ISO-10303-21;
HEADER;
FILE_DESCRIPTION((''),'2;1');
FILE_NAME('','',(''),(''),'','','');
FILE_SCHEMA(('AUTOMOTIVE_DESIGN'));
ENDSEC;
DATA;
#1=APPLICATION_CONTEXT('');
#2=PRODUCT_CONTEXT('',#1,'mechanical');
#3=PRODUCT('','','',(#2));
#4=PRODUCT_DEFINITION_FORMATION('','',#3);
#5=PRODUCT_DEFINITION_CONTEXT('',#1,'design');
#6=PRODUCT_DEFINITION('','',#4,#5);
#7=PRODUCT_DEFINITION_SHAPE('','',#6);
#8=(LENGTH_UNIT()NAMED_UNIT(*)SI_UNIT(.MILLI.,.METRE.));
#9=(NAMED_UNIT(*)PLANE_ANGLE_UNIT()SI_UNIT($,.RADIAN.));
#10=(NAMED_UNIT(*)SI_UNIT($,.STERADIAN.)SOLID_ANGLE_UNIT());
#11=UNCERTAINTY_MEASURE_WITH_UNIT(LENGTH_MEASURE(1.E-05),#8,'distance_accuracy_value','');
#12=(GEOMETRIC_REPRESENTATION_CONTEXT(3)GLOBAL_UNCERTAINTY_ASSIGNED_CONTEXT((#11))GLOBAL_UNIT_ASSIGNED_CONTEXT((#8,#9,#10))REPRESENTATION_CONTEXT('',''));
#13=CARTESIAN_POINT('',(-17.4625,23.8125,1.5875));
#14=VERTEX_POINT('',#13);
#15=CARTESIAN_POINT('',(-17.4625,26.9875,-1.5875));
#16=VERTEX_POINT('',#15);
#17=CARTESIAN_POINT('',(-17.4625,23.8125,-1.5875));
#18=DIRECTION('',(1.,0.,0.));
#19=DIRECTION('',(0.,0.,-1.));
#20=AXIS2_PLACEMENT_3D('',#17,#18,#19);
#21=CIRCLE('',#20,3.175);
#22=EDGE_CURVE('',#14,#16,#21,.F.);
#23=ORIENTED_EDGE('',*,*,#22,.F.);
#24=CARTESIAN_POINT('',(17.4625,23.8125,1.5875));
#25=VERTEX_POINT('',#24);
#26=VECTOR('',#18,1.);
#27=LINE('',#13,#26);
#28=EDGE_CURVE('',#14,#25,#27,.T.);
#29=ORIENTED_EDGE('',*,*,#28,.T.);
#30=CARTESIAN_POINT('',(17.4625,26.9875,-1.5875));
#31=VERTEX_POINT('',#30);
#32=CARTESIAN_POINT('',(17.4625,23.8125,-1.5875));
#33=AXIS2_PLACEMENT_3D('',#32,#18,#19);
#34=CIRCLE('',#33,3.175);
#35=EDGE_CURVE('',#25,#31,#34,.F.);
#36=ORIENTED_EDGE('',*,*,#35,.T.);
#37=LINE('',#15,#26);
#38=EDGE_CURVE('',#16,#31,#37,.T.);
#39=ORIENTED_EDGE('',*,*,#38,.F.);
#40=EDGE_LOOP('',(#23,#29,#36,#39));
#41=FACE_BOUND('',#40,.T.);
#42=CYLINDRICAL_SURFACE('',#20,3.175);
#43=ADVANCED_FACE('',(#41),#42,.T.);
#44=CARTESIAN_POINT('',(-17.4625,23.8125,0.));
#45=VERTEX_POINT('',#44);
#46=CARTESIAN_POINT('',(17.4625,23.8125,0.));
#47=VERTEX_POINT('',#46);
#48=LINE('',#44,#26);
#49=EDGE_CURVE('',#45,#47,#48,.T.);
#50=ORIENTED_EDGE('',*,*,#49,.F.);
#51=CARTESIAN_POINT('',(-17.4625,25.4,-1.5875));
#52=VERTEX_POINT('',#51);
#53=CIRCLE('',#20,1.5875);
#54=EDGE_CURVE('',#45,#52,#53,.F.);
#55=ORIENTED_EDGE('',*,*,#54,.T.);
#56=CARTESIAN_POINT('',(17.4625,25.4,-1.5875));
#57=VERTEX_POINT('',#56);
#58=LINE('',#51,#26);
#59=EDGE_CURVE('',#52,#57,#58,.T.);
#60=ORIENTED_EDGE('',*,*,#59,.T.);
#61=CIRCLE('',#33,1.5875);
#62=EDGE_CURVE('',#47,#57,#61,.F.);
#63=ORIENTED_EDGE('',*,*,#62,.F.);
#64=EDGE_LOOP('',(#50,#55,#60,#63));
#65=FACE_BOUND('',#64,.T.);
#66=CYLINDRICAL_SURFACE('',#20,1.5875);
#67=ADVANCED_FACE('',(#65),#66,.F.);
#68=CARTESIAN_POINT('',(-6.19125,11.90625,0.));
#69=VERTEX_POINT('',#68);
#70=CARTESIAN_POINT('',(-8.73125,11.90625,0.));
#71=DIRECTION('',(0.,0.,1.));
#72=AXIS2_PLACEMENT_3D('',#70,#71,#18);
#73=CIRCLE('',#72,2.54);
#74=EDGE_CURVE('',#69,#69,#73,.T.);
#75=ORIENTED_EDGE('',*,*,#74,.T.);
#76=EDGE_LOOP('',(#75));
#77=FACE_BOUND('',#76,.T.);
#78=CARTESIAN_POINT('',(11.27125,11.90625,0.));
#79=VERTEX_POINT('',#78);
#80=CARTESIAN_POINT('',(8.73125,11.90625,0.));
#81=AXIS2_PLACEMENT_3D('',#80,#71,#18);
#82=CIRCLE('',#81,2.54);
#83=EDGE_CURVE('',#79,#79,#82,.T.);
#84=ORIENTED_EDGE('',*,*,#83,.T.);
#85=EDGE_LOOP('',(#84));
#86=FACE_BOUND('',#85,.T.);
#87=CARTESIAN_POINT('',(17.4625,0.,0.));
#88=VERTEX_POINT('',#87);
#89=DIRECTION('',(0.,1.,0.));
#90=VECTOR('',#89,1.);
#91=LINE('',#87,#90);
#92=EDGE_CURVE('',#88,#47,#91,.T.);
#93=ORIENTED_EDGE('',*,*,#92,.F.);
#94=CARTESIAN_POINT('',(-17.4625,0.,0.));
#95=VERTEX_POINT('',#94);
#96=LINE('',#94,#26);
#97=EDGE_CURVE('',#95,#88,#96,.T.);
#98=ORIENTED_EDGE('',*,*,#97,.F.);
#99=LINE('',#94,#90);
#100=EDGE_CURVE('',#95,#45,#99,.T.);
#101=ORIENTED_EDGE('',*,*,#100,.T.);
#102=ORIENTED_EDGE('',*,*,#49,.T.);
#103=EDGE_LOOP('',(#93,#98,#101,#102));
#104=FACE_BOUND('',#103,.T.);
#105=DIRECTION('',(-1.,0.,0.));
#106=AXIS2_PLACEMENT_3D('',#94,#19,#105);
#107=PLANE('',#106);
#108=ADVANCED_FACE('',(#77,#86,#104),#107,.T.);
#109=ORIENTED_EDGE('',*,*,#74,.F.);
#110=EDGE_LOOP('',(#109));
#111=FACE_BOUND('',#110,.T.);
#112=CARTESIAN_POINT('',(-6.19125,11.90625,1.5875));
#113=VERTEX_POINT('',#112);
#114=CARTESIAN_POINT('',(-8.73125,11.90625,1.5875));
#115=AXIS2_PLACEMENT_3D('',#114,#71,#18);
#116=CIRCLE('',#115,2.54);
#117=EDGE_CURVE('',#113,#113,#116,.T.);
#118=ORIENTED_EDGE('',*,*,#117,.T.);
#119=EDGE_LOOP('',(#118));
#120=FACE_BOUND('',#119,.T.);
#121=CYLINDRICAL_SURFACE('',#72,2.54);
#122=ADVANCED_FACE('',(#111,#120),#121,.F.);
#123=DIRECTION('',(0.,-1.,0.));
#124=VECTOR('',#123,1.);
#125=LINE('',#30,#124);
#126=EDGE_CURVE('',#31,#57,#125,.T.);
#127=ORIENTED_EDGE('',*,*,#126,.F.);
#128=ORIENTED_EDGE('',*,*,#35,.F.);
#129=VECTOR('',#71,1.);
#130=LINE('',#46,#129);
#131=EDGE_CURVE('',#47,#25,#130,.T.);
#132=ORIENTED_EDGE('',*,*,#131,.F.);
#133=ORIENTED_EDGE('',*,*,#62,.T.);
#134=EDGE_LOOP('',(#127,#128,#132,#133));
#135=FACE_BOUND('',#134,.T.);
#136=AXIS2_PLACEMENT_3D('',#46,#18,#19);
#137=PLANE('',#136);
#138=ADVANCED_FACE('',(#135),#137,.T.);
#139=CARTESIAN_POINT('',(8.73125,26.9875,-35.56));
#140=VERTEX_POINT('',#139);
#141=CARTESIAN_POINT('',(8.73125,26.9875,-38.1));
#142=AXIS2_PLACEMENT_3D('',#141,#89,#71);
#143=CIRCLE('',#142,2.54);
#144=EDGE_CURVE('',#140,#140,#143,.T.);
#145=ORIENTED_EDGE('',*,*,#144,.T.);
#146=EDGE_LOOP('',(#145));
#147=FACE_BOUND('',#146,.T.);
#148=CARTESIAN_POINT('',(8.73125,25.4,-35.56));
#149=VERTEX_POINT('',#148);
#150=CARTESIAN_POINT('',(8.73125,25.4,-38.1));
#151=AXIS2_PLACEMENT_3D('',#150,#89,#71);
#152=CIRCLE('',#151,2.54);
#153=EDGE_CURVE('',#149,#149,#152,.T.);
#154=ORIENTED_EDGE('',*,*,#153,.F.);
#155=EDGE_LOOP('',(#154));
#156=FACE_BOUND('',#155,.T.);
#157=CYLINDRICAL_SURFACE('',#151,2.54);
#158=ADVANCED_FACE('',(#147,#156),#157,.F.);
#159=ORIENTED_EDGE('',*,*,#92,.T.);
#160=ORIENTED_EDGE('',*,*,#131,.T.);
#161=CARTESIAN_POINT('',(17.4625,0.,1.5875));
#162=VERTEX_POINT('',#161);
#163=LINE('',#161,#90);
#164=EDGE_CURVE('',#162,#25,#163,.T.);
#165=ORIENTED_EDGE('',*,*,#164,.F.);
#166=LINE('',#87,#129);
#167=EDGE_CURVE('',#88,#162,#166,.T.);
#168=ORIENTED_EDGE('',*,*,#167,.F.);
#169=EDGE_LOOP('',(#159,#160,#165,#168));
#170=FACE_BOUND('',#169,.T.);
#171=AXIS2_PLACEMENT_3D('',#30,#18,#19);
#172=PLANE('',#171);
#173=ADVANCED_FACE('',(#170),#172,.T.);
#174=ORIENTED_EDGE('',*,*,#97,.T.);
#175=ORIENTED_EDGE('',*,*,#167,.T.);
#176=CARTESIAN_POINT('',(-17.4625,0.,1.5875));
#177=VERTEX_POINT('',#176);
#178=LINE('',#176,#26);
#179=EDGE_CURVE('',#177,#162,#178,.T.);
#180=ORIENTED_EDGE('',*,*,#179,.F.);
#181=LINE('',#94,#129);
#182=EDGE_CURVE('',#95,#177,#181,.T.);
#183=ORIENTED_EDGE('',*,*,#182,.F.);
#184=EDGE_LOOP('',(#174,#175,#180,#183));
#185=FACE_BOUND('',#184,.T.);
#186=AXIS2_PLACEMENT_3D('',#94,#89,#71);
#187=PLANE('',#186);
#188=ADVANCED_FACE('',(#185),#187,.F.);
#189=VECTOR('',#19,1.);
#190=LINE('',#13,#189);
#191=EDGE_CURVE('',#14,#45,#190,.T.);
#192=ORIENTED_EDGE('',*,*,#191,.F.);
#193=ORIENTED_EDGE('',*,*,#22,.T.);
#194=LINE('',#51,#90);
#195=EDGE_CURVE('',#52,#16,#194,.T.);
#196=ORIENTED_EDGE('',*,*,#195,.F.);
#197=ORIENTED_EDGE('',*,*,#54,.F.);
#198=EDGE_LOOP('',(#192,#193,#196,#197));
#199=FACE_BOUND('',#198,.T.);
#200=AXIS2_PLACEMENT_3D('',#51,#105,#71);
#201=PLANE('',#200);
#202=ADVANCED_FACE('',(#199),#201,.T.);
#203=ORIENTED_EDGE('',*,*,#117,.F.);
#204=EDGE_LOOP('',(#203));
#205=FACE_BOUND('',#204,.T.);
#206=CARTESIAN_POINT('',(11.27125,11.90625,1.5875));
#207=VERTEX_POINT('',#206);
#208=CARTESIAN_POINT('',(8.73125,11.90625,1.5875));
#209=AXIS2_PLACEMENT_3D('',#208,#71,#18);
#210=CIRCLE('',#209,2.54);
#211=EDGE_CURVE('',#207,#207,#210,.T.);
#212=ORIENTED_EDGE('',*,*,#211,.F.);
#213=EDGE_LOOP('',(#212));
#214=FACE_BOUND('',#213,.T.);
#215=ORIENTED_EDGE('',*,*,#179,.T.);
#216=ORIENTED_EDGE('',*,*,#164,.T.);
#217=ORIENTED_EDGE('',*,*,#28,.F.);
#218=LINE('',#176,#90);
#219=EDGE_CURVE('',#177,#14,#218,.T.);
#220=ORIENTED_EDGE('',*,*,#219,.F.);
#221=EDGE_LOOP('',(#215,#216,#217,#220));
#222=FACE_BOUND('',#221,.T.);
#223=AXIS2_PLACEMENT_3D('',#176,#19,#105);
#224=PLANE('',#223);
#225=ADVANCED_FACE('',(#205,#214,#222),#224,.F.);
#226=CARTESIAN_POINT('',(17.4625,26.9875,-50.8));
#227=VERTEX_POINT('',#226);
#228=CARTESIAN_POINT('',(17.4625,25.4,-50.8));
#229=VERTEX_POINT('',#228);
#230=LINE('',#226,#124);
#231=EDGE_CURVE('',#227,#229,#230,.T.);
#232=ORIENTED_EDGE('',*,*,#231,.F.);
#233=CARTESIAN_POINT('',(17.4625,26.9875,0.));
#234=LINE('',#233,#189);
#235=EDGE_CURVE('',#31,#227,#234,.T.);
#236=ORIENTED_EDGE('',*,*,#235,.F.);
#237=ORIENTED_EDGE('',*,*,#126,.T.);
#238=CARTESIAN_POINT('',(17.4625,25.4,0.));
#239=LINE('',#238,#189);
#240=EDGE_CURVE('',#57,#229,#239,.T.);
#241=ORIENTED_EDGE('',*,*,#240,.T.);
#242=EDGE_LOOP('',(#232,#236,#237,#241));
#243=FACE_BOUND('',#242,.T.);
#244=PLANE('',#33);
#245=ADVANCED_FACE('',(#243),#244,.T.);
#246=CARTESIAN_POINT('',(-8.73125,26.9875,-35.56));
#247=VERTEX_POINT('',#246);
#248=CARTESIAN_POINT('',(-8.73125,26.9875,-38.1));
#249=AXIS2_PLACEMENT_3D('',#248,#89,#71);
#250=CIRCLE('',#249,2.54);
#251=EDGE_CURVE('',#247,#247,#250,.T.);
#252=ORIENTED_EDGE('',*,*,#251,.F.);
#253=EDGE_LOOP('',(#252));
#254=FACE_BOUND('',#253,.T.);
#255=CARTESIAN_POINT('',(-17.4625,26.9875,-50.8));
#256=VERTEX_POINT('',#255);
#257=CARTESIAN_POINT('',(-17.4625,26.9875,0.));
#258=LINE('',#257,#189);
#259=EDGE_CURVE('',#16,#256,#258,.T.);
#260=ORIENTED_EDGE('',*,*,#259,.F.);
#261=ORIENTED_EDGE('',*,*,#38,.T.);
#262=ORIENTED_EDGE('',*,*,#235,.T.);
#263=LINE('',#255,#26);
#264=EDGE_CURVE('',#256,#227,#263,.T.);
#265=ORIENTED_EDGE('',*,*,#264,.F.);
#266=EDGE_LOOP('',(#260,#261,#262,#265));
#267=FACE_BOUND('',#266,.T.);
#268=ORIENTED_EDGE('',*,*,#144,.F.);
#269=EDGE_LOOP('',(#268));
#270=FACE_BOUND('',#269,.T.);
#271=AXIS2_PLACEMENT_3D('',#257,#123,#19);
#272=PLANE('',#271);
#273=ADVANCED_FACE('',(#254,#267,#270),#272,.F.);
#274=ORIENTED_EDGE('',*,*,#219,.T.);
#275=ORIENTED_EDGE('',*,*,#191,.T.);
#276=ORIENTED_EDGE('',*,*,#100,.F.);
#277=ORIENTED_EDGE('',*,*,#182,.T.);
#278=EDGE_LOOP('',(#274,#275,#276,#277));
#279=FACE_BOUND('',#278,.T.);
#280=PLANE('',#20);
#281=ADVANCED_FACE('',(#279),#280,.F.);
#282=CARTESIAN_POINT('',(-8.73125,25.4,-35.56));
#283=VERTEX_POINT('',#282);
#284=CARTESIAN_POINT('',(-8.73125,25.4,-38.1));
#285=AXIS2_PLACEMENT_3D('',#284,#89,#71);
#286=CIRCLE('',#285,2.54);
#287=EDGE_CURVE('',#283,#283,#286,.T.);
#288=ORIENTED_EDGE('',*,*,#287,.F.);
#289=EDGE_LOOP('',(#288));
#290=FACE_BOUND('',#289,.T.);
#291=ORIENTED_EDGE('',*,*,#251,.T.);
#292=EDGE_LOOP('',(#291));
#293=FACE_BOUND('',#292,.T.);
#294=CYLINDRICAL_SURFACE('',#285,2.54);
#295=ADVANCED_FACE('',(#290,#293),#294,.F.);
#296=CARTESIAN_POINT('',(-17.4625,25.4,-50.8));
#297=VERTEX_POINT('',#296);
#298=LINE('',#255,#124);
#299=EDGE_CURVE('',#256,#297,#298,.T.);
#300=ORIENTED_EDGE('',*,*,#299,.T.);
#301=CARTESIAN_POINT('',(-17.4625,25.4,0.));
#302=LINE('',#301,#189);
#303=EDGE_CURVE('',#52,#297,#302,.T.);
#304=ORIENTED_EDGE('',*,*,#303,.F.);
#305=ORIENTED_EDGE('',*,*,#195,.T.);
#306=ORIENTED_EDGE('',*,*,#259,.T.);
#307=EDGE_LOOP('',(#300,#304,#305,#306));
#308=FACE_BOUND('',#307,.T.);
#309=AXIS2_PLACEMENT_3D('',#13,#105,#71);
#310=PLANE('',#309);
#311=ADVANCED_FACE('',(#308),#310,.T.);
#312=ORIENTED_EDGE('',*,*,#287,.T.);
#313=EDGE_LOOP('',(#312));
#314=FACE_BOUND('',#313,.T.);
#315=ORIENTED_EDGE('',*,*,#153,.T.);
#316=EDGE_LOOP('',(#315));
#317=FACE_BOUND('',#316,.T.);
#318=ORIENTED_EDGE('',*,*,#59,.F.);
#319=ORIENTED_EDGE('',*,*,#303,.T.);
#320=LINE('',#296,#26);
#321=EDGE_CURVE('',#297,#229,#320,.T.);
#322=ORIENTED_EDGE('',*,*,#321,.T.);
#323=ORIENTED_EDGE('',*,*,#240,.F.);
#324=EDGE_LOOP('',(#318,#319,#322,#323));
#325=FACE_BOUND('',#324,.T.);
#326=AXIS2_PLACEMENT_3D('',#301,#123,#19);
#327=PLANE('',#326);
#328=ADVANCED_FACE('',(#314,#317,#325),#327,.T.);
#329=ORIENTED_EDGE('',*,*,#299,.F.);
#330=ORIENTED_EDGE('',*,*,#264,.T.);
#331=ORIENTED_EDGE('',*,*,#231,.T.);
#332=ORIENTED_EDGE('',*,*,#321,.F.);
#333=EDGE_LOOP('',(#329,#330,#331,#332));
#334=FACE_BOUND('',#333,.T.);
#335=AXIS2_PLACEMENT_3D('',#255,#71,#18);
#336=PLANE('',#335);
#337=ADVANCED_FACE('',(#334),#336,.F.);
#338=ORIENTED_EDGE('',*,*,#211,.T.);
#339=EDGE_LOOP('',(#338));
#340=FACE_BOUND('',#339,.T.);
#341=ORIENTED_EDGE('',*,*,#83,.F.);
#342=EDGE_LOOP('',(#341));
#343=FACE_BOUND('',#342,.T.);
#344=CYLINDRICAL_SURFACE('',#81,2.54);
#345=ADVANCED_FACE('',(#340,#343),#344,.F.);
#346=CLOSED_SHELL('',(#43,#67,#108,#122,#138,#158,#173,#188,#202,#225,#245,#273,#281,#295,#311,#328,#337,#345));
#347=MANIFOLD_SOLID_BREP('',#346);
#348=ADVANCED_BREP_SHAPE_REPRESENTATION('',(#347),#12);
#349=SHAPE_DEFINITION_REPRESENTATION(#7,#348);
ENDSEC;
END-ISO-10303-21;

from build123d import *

# Parameters (mm, degrees)
BASE_FLANGE1_DEPTH = 17.4625
SKETCH6_R          = 2.54
CUT_EXTRUDE1_DEPTH = 2.54
SKETCH7_R          = 2.54
CUT_EXTRUDE2_DEPTH = 2.54


# Sheet-metal steps are written as plain solids
with BuildPart() as part:
    # Sketch1 → Base-Flange1 (new, symmetric)
    with BuildSketch(Plane(origin=(0, 0, 0), x_dir=(0, 0, -1), z_dir=(1, 0, 0))):
        with BuildLine():
            Line((0, 0), (0, 23.8125))
            ThreePointArc((0, 23.8125), (0.464967985, 24.935032015), (1.5875, 25.4))
            Line((1.5875, 25.4), (50.8, 25.4))
            Line((50.8, 25.4), (50.8, 26.9875))
            Line((50.8, 26.9875), (1.5875, 26.9875))
            ThreePointArc((1.5875, 26.9875), (-0.65756403, 26.05756403), (-1.5875, 23.8125))
            Line((-1.5875, 23.8125), (-1.5875, 0))
            Line((-1.5875, 0), (0, 0))
        make_face()
    extrude(amount=BASE_FLANGE1_DEPTH, both=True)

    # Sketch6 → Cut-Extrude1 (cut)
    with BuildSketch(Plane.XY.offset(1.5875)):
        with Locations((-8.73125, 11.90625)):
            Circle(SKETCH6_R)
        with Locations((8.73125, 11.90625)):
            Circle(SKETCH6_R)
    extrude(amount=-CUT_EXTRUDE1_DEPTH, mode=Mode.SUBTRACT)

    # Sketch7 → Cut-Extrude2 (cut)
    with BuildSketch(Plane(origin=(0, 26.9875, 0), x_dir=(1, 0, 0), z_dir=(0, 1, 0))):
        with Locations(Location((-8.73125, 38.1, 0), (0, 0, 270))):
            Circle(SKETCH7_R)
        with Locations(Location((8.73125, 38.1, 0), (0, 0, 270))):
            Circle(SKETCH7_R)
    extrude(amount=-CUT_EXTRUDE2_DEPTH, mode=Mode.SUBTRACT)


solid = part.part
